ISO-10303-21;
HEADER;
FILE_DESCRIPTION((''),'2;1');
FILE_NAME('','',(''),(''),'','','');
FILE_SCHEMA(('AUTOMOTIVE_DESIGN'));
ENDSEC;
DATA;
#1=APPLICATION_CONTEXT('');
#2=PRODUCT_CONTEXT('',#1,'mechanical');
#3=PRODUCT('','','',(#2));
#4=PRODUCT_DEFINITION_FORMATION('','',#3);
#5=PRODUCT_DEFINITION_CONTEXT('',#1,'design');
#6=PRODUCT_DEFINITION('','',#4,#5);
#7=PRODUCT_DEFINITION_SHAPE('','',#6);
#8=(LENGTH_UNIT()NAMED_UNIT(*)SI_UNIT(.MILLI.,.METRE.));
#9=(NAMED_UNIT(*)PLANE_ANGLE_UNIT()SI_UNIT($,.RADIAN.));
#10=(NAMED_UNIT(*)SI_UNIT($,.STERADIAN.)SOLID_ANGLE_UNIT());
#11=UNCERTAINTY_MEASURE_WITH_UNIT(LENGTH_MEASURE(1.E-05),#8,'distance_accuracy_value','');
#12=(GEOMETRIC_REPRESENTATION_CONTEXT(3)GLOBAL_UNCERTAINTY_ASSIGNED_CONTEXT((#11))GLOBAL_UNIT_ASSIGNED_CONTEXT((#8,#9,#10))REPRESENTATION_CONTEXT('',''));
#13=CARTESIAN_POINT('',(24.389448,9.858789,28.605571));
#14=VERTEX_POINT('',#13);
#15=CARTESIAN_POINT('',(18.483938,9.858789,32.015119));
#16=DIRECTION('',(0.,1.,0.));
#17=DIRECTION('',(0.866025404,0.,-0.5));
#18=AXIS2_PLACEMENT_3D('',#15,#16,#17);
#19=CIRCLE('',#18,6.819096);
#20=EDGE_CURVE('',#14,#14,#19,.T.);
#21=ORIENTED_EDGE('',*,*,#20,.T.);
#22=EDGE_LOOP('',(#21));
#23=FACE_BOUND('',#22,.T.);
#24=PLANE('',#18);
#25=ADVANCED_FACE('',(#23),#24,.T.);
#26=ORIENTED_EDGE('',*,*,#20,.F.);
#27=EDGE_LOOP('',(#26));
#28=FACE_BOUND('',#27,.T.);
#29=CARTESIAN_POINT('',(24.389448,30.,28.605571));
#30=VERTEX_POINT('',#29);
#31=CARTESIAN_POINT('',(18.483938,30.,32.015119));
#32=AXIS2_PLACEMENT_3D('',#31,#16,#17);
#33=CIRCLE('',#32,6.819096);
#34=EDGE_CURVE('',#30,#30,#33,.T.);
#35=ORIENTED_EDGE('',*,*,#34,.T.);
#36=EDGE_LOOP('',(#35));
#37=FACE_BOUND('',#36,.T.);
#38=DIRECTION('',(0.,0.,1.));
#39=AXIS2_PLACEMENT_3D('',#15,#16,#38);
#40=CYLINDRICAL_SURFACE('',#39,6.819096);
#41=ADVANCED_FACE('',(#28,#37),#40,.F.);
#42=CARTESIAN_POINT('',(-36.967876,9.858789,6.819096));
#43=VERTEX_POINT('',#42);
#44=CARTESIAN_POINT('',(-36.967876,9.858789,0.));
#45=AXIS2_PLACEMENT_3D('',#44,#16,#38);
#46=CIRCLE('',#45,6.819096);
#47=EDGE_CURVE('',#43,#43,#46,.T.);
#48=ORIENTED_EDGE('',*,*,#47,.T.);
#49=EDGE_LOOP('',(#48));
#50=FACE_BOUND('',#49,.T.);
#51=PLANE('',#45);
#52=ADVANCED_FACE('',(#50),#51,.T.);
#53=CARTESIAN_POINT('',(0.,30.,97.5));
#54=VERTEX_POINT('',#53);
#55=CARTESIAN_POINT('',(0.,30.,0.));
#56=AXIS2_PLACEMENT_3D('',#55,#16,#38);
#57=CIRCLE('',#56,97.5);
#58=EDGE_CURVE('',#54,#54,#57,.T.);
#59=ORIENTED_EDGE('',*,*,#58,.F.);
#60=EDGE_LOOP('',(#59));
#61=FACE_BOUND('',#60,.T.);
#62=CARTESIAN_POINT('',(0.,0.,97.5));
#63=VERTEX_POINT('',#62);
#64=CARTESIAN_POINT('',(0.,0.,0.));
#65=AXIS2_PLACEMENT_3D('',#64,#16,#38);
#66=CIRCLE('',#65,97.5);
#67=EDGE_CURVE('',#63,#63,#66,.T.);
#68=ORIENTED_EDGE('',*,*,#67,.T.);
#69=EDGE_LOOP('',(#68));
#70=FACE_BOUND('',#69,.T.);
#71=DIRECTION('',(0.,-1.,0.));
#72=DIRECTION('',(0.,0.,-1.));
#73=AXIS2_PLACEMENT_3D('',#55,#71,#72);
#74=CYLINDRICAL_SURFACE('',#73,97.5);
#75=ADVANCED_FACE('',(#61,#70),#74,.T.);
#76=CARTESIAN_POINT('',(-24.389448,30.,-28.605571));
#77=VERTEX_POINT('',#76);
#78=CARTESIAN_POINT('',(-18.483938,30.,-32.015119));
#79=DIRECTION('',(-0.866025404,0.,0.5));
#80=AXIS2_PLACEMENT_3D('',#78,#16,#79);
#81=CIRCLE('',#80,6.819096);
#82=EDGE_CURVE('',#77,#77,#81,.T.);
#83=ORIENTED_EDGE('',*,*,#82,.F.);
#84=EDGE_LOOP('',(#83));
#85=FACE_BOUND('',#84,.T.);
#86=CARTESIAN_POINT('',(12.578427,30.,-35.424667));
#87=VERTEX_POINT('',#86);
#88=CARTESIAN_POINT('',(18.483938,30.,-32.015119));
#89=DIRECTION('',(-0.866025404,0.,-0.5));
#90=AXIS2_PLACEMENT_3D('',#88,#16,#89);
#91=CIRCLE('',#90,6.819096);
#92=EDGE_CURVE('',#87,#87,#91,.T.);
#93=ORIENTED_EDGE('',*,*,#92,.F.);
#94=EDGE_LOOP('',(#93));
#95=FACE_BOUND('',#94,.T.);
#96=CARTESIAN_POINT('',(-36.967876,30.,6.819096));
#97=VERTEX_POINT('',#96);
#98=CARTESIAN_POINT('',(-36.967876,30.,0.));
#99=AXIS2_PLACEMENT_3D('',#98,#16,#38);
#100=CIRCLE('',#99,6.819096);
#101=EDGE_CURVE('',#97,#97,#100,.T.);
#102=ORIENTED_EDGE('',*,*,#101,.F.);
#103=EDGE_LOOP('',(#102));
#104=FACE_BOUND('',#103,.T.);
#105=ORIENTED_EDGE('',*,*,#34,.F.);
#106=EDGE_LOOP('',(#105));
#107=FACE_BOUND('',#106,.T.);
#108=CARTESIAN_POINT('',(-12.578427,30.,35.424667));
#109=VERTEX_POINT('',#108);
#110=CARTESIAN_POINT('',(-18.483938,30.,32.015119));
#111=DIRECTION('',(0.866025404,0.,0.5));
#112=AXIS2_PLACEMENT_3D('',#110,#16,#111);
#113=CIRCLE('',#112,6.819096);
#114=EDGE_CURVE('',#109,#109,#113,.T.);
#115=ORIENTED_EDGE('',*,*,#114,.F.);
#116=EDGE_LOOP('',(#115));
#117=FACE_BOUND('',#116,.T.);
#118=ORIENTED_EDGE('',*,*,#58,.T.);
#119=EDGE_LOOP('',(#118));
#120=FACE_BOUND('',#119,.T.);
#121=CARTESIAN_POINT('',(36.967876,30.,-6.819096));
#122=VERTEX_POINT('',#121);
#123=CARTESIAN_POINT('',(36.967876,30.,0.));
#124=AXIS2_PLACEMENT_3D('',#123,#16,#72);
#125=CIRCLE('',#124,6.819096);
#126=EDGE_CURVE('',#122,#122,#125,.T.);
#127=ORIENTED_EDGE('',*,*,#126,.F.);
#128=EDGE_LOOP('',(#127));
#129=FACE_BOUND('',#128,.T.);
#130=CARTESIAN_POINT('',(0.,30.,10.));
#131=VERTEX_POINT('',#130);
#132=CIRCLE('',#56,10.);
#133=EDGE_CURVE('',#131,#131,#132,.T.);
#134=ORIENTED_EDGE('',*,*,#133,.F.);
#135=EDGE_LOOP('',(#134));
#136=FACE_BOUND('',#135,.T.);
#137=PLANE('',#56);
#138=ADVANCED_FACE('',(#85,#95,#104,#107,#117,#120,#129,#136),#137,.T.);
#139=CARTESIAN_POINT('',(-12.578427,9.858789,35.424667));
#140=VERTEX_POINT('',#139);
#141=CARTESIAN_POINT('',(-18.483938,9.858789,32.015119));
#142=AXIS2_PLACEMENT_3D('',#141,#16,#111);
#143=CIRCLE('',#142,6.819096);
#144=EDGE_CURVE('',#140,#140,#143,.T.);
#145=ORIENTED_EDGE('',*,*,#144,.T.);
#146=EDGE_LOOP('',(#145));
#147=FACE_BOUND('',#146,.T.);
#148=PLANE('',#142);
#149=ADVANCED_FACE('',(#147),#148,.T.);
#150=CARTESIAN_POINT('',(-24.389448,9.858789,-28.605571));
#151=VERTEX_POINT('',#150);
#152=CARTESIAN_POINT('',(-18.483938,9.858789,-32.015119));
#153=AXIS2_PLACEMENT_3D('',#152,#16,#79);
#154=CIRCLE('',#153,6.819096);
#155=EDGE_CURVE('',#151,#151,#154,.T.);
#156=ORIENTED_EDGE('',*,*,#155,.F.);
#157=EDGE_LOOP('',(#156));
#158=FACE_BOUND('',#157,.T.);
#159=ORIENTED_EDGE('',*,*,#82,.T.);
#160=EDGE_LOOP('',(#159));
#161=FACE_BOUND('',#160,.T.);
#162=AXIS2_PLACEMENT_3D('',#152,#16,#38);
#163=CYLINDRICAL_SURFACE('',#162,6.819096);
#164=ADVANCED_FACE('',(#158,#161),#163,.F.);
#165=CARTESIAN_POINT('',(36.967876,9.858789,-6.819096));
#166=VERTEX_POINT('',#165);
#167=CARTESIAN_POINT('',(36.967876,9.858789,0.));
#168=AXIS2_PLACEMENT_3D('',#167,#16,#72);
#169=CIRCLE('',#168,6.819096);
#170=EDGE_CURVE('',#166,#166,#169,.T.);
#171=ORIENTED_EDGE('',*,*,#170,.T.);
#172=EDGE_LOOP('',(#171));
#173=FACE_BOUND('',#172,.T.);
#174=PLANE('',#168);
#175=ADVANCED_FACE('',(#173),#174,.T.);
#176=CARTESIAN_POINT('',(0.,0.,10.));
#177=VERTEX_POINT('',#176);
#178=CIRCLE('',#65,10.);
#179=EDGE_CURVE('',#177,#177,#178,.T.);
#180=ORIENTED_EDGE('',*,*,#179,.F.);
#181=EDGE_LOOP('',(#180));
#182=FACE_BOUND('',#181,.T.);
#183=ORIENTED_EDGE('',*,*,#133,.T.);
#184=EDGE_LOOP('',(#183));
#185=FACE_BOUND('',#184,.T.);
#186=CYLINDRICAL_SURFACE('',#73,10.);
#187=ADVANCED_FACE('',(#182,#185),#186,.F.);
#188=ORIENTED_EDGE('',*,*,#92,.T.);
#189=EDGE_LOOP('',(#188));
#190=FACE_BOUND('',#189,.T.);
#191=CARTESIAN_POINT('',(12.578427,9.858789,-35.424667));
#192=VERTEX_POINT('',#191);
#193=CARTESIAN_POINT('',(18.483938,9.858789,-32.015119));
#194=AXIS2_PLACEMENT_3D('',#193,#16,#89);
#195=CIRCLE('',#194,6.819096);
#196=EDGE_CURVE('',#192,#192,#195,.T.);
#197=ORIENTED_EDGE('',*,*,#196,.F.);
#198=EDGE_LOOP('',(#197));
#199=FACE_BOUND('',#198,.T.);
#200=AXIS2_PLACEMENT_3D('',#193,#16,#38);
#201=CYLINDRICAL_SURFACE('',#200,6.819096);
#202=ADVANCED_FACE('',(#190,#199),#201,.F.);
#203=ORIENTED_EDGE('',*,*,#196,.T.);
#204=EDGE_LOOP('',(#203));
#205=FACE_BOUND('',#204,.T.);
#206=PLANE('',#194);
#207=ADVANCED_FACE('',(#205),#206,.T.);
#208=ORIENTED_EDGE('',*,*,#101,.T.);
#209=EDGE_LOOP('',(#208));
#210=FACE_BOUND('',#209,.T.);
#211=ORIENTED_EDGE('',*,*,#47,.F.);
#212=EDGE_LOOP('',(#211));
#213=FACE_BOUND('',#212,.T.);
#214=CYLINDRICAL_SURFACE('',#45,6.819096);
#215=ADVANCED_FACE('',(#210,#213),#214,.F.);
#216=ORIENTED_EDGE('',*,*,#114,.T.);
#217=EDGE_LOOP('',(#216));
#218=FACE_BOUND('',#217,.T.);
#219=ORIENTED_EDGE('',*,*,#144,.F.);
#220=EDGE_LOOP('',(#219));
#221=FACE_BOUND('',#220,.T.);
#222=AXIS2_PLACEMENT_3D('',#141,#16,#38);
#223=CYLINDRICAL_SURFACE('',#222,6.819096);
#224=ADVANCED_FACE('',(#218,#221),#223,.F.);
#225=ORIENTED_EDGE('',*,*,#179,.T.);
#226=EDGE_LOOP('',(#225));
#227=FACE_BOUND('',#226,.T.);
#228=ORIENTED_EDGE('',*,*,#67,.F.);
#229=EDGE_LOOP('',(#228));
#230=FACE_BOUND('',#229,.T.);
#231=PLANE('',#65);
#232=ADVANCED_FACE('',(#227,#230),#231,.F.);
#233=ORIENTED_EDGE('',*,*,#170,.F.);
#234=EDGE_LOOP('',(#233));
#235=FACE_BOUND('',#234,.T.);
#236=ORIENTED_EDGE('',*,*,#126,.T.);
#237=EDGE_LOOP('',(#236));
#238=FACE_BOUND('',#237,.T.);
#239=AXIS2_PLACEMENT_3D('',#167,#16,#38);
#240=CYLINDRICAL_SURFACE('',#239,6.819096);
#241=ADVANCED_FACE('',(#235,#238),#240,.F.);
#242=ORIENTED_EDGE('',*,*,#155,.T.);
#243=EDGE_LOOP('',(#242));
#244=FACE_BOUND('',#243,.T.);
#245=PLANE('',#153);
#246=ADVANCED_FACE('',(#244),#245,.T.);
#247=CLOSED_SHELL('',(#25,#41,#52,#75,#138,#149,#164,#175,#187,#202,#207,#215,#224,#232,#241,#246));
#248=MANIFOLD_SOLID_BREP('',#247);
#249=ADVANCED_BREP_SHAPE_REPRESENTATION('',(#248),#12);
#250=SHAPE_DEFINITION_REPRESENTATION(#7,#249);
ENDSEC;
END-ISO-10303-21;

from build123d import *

# Parameters (mm, degrees)
SKETCH1_R           = 97.5
BOSS_EXTRUDE1_DEPTH = 30
SKETCH2_R           = 10
CUT_EXTRUDE1_DEPTH  = 142.111657917
SKETCH3_R           = 6.819096127
CUT_EXTRUDE2_DEPTH  = 20.141210853
CIRPATTERN1_COUNT   = 6


with BuildPart() as part:
    # Sketch1 → Boss-Extrude1 (new body)
    with BuildSketch(Plane(origin=(0, 0, 0), x_dir=(1, 0, 0), z_dir=(0, 1, 0))):
        Circle(SKETCH1_R)
    extrude(amount=BOSS_EXTRUDE1_DEPTH)

    # Sketch2 → Cut-Extrude1 (cut, through all)
    with BuildSketch(Plane(origin=(0, 0, 0), x_dir=(1, 0, 0), z_dir=(0, 1, 0))):
        Circle(SKETCH2_R)
    extrude(amount=CUT_EXTRUDE1_DEPTH, mode=Mode.SUBTRACT)

    # Sketch3 → Cut-Extrude2 (cut)
    with BuildSketch(Plane(origin=(0, 30, 0), x_dir=(1, 0, 0), z_dir=(0, 1, 0))):
        with Locations((-36.967875527, 0)):
            Circle(SKETCH3_R)
    cut_extrude2 = extrude(amount=-CUT_EXTRUDE2_DEPTH, mode=Mode.SUBTRACT)

    # CirPattern1: Cut-Extrude2 ×6 about axis
    cirpattern1_axis = Axis((0, 0, 0), (0, 1, 0))
    for i in range(1, CIRPATTERN1_COUNT):
        add(cut_extrude2.rotate(cirpattern1_axis, i * 360 / CIRPATTERN1_COUNT), mode=Mode.SUBTRACT)


solid = part.part
